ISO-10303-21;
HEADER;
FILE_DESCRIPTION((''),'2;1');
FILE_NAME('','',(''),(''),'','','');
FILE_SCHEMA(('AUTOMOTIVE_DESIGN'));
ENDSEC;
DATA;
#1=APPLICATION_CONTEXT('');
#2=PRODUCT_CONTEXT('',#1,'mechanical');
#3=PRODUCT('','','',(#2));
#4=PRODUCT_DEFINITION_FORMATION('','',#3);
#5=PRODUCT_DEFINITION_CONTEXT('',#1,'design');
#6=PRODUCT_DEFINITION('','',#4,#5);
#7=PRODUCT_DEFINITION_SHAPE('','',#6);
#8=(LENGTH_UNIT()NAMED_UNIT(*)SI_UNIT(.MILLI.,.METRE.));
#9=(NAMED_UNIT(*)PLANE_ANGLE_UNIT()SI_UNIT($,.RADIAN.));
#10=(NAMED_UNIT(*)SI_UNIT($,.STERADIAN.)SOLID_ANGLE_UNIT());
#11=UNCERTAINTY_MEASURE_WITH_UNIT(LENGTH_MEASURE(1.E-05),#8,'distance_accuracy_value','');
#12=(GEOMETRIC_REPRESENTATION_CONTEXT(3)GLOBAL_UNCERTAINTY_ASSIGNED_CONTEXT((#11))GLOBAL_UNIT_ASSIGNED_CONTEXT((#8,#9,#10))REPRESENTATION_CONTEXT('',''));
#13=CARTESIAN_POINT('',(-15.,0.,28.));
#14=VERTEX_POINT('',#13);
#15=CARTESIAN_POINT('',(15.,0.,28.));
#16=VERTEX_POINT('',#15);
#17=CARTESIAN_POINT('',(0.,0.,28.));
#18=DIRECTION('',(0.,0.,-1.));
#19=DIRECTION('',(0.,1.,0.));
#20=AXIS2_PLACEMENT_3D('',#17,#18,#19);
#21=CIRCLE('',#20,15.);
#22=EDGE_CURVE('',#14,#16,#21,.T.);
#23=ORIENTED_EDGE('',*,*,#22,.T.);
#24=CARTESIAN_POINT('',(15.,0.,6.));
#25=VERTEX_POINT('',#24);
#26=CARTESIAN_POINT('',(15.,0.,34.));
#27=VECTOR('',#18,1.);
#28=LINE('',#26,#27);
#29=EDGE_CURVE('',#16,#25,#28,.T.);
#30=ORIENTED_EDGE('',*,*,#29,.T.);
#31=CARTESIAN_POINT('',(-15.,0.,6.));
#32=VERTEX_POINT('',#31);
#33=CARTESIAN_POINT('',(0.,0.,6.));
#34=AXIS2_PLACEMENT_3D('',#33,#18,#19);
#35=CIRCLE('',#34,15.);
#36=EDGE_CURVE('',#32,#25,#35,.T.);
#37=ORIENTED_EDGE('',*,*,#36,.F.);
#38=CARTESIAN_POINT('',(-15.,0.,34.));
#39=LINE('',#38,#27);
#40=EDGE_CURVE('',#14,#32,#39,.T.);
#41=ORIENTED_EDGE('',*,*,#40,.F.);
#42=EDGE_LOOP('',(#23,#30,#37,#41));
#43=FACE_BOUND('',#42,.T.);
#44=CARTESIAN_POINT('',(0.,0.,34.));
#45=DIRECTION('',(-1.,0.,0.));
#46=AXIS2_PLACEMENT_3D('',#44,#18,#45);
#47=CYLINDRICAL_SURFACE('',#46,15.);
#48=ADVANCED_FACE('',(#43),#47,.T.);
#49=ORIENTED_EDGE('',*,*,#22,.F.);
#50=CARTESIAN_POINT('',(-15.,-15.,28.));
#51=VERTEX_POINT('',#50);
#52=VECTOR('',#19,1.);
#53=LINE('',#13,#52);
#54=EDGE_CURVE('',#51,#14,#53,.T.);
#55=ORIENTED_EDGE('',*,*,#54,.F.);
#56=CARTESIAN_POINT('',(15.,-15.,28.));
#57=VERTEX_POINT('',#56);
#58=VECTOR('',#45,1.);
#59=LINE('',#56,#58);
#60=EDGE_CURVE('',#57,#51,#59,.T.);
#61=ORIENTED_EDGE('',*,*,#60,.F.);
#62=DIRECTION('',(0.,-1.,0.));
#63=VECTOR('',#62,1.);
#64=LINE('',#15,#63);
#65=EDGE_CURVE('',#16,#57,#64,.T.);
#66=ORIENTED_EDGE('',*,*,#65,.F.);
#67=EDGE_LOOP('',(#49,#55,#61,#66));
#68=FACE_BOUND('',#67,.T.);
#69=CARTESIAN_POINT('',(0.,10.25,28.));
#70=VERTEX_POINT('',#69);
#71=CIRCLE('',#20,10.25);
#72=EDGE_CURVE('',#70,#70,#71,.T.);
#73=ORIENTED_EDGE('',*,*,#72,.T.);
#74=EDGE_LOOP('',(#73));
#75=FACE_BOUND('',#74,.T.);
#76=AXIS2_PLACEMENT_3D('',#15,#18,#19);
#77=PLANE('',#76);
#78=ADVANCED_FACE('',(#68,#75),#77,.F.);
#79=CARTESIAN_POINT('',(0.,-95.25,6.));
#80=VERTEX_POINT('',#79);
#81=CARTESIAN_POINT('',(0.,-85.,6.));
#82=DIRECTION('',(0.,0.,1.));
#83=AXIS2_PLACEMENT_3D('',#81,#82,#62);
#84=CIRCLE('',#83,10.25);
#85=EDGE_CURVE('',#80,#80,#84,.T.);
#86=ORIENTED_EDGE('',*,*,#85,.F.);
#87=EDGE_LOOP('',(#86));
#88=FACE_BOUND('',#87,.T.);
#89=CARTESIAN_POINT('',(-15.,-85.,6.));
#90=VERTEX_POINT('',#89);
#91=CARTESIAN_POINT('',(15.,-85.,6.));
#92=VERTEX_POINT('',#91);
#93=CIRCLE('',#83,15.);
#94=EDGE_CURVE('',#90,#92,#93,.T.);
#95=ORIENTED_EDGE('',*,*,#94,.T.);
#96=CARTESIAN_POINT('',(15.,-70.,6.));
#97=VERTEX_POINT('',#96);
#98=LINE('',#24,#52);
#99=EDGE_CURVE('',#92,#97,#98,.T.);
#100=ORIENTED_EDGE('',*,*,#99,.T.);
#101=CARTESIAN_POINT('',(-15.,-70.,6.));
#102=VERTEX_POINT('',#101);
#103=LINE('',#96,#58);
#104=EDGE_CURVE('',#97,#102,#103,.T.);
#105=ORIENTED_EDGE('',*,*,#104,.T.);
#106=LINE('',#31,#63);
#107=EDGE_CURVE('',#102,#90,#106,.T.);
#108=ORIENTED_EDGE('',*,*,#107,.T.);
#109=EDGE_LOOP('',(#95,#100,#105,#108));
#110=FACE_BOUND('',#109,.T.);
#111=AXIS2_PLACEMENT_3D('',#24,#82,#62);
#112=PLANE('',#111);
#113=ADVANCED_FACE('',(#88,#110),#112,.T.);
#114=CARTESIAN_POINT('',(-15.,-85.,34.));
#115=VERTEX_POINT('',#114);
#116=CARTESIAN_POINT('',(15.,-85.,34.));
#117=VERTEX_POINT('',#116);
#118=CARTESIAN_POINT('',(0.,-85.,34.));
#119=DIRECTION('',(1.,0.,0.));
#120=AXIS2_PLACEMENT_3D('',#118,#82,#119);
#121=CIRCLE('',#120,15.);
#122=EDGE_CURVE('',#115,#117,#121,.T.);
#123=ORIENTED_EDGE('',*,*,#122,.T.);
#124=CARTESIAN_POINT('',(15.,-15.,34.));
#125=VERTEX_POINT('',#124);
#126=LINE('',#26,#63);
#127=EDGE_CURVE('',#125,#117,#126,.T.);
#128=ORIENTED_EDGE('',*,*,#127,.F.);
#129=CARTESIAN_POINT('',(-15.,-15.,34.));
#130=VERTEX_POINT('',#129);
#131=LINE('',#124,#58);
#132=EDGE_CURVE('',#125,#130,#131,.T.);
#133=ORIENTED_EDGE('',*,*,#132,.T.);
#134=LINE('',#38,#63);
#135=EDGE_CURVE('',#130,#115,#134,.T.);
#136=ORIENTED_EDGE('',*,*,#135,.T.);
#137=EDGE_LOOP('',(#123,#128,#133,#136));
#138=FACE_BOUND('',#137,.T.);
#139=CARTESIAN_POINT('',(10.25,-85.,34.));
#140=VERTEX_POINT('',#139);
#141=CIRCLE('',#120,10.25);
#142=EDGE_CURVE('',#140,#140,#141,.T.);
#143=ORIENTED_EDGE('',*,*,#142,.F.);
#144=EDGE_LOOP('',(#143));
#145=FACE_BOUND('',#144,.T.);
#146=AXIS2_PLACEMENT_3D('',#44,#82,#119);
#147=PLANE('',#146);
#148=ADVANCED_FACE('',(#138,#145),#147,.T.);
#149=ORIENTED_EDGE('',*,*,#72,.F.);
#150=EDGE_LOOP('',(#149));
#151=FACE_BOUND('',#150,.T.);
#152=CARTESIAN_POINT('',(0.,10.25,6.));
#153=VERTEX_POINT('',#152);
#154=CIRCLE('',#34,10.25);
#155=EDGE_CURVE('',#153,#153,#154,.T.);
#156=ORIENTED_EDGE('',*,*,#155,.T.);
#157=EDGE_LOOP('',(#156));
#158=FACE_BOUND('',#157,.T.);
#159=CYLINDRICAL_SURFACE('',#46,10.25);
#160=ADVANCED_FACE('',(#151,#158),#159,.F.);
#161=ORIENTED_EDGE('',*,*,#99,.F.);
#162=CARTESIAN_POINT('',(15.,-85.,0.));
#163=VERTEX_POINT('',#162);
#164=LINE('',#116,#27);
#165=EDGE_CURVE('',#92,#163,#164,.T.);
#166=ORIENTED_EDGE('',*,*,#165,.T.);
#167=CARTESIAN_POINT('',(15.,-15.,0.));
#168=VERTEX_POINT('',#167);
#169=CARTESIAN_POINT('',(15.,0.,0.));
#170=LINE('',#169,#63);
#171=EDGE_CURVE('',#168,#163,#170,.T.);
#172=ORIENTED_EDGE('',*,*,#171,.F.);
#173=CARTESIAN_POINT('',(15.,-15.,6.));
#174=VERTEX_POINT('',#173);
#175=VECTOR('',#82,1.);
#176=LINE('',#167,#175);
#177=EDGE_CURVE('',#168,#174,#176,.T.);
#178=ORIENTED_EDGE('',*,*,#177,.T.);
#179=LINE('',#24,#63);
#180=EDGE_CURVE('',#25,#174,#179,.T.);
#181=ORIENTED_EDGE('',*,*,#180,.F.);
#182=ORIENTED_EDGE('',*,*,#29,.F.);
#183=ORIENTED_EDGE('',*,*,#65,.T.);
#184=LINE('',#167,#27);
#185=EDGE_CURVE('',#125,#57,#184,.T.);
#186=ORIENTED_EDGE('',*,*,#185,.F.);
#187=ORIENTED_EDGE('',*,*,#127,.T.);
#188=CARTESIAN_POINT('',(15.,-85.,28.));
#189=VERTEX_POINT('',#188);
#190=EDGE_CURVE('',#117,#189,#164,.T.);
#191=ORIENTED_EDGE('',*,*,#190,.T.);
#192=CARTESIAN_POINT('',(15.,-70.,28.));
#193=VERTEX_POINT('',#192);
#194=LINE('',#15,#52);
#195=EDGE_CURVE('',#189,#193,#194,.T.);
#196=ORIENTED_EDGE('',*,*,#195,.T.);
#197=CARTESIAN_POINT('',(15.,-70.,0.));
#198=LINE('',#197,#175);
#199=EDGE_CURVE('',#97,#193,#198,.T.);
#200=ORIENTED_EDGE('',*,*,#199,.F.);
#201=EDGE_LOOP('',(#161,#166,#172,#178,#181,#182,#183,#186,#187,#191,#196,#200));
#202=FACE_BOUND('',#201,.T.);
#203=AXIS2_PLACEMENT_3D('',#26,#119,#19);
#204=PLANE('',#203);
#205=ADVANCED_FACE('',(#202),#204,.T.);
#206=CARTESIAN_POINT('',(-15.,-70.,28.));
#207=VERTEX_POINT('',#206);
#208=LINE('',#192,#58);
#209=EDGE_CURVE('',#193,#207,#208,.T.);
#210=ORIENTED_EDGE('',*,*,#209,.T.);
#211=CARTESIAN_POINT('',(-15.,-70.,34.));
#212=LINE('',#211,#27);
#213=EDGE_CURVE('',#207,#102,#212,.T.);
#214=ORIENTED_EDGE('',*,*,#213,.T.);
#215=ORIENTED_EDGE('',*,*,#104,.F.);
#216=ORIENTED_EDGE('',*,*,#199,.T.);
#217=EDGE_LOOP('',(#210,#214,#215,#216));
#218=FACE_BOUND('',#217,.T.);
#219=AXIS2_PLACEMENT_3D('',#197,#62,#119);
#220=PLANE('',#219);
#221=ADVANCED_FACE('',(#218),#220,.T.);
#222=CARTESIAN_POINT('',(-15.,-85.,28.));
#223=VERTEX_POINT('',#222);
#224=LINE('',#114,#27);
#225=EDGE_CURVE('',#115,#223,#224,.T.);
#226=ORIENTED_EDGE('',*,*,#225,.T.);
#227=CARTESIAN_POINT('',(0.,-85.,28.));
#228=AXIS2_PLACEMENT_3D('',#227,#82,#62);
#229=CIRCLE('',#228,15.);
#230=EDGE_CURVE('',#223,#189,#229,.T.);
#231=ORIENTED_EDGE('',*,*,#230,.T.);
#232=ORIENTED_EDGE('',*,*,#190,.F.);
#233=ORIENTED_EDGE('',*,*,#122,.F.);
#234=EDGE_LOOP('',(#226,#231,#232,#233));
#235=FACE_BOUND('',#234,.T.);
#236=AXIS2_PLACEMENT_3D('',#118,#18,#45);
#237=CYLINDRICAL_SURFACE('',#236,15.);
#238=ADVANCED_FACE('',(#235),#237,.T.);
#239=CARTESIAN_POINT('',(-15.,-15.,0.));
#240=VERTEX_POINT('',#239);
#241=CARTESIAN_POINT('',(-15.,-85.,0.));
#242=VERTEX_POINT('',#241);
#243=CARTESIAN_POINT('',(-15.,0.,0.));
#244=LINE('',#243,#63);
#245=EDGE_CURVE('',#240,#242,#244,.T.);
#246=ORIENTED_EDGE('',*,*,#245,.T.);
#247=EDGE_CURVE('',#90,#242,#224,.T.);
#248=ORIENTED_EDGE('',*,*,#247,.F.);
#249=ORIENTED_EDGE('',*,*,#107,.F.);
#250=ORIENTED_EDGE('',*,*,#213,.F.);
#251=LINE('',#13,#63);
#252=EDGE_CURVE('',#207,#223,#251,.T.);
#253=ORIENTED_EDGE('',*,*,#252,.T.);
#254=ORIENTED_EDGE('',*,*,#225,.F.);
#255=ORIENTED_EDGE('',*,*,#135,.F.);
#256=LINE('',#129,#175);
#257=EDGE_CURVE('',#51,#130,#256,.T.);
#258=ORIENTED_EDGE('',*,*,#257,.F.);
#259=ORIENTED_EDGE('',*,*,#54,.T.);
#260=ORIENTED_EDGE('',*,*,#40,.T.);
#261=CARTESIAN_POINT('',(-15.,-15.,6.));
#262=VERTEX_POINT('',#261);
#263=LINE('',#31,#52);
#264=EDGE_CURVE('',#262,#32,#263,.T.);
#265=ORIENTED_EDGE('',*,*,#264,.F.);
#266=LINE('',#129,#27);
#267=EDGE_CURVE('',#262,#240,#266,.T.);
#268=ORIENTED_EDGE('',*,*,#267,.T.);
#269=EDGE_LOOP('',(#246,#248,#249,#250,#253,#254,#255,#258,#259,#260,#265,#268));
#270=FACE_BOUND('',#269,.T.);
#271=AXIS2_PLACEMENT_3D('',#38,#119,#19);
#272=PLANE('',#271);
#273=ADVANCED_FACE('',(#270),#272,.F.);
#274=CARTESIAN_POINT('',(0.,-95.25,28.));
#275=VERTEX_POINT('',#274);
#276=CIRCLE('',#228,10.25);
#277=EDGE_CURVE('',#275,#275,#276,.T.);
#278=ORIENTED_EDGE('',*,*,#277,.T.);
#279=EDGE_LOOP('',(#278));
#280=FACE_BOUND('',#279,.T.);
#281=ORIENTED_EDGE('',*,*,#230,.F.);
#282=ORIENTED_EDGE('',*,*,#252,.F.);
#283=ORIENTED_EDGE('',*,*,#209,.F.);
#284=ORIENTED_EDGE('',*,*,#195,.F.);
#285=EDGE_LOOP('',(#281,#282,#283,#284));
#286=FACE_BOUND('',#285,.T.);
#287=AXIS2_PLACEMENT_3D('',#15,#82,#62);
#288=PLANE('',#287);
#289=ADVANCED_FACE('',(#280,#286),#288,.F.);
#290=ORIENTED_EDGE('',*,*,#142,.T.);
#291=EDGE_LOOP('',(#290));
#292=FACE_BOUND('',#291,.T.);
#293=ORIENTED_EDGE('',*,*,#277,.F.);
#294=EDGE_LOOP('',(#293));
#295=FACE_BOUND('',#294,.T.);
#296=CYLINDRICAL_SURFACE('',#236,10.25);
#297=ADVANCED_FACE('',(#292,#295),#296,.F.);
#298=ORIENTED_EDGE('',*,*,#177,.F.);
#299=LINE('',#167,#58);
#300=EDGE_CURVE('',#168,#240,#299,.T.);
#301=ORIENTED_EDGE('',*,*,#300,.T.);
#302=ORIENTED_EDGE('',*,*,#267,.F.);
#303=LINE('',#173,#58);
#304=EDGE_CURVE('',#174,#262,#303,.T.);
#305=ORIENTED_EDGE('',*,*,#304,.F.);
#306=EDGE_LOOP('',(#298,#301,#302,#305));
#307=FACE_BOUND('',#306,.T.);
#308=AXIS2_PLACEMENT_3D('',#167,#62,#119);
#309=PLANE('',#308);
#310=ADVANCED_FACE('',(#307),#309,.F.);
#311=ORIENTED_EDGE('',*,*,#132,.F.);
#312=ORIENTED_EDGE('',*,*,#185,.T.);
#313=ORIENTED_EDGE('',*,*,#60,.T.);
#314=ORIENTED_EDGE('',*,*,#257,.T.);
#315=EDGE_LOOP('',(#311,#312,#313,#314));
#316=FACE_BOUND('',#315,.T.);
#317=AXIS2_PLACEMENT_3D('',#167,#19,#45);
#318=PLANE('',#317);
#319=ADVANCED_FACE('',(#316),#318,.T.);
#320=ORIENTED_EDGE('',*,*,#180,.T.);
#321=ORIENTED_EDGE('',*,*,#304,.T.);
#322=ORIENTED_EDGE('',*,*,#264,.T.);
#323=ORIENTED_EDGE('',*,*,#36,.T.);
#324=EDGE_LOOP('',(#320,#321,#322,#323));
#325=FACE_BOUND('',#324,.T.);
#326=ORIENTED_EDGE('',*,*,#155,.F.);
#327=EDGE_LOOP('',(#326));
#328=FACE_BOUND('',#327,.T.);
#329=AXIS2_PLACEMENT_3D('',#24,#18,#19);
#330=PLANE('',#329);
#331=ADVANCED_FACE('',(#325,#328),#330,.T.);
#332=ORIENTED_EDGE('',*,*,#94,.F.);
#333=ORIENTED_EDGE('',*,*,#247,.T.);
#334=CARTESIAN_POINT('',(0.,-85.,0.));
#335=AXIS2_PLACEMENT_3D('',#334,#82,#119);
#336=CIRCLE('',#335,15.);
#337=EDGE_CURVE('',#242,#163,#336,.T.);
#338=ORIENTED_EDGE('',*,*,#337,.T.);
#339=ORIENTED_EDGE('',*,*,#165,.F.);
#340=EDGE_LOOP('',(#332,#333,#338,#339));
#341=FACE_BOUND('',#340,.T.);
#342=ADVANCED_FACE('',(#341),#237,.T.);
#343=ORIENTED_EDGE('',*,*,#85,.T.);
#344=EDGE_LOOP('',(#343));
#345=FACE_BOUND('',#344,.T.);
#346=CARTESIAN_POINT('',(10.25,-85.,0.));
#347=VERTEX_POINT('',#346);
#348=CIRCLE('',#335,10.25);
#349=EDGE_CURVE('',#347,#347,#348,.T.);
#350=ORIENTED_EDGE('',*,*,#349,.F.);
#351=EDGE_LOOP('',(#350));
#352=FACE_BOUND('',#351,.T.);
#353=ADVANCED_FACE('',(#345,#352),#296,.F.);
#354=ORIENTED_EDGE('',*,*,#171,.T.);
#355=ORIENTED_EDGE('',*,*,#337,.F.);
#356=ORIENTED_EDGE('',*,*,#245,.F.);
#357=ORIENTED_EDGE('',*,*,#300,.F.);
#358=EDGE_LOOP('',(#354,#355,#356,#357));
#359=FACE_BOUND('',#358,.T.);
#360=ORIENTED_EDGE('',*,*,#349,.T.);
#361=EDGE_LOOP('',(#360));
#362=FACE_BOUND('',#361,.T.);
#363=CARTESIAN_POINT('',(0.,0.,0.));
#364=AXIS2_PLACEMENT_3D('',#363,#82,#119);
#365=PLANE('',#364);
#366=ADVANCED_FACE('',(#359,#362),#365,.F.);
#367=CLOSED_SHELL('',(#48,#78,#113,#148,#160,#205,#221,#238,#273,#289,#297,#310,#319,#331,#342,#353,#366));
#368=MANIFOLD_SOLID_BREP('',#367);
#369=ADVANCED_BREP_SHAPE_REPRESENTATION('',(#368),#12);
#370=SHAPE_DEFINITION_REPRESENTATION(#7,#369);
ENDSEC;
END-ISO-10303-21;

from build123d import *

# Parameters (mm, degrees)
SKETCH1_R               = 10.25
BOSS_EXTRUDE2_DEPTH     = 34
CUT_EXTRUDE3_DEPTH      = 110.79981785
CUT_EXTRUDE3_DEPTH_BACK = 110.79981785
SKETCH3_W               = 6
SKETCH3_H               = 30
SKETCH3_W_2             = 22


with BuildPart() as part:
    # Sketch1 → Boss-Extrude2 (new body)
    with BuildSketch(Plane.XY):
        with BuildLine():
            Line((15, -85), (15, 0))
            ThreePointArc((15, 0), (0, 15), (-15, 0))
            Line((-15, 0), (-15, -85))
            ThreePointArc((-15, -85), (0, -100), (15, -85))
        make_face()
        with Locations((0, -85)):
            Circle(SKETCH1_R, mode=Mode.SUBTRACT)
        Circle(SKETCH1_R, mode=Mode.SUBTRACT)
    extrude(amount=BOSS_EXTRUDE2_DEPTH)

    # Sketch3 → Cut-Extrude3 (cut, two sides: drawn at the far end of the back side and taken through both)
    with BuildSketch(Plane.ZY.offset(15).offset(-CUT_EXTRUDE3_DEPTH_BACK)):
        with Locations((3, 0)):
            Rectangle(SKETCH3_W, SKETCH3_H)
        with Locations((31, 0)):
            Rectangle(SKETCH3_W, SKETCH3_H)
        with Locations((17, -85)):
            Rectangle(SKETCH3_W_2, SKETCH3_H)
    extrude(amount=CUT_EXTRUDE3_DEPTH + CUT_EXTRUDE3_DEPTH_BACK, mode=Mode.SUBTRACT)


solid = part.part
